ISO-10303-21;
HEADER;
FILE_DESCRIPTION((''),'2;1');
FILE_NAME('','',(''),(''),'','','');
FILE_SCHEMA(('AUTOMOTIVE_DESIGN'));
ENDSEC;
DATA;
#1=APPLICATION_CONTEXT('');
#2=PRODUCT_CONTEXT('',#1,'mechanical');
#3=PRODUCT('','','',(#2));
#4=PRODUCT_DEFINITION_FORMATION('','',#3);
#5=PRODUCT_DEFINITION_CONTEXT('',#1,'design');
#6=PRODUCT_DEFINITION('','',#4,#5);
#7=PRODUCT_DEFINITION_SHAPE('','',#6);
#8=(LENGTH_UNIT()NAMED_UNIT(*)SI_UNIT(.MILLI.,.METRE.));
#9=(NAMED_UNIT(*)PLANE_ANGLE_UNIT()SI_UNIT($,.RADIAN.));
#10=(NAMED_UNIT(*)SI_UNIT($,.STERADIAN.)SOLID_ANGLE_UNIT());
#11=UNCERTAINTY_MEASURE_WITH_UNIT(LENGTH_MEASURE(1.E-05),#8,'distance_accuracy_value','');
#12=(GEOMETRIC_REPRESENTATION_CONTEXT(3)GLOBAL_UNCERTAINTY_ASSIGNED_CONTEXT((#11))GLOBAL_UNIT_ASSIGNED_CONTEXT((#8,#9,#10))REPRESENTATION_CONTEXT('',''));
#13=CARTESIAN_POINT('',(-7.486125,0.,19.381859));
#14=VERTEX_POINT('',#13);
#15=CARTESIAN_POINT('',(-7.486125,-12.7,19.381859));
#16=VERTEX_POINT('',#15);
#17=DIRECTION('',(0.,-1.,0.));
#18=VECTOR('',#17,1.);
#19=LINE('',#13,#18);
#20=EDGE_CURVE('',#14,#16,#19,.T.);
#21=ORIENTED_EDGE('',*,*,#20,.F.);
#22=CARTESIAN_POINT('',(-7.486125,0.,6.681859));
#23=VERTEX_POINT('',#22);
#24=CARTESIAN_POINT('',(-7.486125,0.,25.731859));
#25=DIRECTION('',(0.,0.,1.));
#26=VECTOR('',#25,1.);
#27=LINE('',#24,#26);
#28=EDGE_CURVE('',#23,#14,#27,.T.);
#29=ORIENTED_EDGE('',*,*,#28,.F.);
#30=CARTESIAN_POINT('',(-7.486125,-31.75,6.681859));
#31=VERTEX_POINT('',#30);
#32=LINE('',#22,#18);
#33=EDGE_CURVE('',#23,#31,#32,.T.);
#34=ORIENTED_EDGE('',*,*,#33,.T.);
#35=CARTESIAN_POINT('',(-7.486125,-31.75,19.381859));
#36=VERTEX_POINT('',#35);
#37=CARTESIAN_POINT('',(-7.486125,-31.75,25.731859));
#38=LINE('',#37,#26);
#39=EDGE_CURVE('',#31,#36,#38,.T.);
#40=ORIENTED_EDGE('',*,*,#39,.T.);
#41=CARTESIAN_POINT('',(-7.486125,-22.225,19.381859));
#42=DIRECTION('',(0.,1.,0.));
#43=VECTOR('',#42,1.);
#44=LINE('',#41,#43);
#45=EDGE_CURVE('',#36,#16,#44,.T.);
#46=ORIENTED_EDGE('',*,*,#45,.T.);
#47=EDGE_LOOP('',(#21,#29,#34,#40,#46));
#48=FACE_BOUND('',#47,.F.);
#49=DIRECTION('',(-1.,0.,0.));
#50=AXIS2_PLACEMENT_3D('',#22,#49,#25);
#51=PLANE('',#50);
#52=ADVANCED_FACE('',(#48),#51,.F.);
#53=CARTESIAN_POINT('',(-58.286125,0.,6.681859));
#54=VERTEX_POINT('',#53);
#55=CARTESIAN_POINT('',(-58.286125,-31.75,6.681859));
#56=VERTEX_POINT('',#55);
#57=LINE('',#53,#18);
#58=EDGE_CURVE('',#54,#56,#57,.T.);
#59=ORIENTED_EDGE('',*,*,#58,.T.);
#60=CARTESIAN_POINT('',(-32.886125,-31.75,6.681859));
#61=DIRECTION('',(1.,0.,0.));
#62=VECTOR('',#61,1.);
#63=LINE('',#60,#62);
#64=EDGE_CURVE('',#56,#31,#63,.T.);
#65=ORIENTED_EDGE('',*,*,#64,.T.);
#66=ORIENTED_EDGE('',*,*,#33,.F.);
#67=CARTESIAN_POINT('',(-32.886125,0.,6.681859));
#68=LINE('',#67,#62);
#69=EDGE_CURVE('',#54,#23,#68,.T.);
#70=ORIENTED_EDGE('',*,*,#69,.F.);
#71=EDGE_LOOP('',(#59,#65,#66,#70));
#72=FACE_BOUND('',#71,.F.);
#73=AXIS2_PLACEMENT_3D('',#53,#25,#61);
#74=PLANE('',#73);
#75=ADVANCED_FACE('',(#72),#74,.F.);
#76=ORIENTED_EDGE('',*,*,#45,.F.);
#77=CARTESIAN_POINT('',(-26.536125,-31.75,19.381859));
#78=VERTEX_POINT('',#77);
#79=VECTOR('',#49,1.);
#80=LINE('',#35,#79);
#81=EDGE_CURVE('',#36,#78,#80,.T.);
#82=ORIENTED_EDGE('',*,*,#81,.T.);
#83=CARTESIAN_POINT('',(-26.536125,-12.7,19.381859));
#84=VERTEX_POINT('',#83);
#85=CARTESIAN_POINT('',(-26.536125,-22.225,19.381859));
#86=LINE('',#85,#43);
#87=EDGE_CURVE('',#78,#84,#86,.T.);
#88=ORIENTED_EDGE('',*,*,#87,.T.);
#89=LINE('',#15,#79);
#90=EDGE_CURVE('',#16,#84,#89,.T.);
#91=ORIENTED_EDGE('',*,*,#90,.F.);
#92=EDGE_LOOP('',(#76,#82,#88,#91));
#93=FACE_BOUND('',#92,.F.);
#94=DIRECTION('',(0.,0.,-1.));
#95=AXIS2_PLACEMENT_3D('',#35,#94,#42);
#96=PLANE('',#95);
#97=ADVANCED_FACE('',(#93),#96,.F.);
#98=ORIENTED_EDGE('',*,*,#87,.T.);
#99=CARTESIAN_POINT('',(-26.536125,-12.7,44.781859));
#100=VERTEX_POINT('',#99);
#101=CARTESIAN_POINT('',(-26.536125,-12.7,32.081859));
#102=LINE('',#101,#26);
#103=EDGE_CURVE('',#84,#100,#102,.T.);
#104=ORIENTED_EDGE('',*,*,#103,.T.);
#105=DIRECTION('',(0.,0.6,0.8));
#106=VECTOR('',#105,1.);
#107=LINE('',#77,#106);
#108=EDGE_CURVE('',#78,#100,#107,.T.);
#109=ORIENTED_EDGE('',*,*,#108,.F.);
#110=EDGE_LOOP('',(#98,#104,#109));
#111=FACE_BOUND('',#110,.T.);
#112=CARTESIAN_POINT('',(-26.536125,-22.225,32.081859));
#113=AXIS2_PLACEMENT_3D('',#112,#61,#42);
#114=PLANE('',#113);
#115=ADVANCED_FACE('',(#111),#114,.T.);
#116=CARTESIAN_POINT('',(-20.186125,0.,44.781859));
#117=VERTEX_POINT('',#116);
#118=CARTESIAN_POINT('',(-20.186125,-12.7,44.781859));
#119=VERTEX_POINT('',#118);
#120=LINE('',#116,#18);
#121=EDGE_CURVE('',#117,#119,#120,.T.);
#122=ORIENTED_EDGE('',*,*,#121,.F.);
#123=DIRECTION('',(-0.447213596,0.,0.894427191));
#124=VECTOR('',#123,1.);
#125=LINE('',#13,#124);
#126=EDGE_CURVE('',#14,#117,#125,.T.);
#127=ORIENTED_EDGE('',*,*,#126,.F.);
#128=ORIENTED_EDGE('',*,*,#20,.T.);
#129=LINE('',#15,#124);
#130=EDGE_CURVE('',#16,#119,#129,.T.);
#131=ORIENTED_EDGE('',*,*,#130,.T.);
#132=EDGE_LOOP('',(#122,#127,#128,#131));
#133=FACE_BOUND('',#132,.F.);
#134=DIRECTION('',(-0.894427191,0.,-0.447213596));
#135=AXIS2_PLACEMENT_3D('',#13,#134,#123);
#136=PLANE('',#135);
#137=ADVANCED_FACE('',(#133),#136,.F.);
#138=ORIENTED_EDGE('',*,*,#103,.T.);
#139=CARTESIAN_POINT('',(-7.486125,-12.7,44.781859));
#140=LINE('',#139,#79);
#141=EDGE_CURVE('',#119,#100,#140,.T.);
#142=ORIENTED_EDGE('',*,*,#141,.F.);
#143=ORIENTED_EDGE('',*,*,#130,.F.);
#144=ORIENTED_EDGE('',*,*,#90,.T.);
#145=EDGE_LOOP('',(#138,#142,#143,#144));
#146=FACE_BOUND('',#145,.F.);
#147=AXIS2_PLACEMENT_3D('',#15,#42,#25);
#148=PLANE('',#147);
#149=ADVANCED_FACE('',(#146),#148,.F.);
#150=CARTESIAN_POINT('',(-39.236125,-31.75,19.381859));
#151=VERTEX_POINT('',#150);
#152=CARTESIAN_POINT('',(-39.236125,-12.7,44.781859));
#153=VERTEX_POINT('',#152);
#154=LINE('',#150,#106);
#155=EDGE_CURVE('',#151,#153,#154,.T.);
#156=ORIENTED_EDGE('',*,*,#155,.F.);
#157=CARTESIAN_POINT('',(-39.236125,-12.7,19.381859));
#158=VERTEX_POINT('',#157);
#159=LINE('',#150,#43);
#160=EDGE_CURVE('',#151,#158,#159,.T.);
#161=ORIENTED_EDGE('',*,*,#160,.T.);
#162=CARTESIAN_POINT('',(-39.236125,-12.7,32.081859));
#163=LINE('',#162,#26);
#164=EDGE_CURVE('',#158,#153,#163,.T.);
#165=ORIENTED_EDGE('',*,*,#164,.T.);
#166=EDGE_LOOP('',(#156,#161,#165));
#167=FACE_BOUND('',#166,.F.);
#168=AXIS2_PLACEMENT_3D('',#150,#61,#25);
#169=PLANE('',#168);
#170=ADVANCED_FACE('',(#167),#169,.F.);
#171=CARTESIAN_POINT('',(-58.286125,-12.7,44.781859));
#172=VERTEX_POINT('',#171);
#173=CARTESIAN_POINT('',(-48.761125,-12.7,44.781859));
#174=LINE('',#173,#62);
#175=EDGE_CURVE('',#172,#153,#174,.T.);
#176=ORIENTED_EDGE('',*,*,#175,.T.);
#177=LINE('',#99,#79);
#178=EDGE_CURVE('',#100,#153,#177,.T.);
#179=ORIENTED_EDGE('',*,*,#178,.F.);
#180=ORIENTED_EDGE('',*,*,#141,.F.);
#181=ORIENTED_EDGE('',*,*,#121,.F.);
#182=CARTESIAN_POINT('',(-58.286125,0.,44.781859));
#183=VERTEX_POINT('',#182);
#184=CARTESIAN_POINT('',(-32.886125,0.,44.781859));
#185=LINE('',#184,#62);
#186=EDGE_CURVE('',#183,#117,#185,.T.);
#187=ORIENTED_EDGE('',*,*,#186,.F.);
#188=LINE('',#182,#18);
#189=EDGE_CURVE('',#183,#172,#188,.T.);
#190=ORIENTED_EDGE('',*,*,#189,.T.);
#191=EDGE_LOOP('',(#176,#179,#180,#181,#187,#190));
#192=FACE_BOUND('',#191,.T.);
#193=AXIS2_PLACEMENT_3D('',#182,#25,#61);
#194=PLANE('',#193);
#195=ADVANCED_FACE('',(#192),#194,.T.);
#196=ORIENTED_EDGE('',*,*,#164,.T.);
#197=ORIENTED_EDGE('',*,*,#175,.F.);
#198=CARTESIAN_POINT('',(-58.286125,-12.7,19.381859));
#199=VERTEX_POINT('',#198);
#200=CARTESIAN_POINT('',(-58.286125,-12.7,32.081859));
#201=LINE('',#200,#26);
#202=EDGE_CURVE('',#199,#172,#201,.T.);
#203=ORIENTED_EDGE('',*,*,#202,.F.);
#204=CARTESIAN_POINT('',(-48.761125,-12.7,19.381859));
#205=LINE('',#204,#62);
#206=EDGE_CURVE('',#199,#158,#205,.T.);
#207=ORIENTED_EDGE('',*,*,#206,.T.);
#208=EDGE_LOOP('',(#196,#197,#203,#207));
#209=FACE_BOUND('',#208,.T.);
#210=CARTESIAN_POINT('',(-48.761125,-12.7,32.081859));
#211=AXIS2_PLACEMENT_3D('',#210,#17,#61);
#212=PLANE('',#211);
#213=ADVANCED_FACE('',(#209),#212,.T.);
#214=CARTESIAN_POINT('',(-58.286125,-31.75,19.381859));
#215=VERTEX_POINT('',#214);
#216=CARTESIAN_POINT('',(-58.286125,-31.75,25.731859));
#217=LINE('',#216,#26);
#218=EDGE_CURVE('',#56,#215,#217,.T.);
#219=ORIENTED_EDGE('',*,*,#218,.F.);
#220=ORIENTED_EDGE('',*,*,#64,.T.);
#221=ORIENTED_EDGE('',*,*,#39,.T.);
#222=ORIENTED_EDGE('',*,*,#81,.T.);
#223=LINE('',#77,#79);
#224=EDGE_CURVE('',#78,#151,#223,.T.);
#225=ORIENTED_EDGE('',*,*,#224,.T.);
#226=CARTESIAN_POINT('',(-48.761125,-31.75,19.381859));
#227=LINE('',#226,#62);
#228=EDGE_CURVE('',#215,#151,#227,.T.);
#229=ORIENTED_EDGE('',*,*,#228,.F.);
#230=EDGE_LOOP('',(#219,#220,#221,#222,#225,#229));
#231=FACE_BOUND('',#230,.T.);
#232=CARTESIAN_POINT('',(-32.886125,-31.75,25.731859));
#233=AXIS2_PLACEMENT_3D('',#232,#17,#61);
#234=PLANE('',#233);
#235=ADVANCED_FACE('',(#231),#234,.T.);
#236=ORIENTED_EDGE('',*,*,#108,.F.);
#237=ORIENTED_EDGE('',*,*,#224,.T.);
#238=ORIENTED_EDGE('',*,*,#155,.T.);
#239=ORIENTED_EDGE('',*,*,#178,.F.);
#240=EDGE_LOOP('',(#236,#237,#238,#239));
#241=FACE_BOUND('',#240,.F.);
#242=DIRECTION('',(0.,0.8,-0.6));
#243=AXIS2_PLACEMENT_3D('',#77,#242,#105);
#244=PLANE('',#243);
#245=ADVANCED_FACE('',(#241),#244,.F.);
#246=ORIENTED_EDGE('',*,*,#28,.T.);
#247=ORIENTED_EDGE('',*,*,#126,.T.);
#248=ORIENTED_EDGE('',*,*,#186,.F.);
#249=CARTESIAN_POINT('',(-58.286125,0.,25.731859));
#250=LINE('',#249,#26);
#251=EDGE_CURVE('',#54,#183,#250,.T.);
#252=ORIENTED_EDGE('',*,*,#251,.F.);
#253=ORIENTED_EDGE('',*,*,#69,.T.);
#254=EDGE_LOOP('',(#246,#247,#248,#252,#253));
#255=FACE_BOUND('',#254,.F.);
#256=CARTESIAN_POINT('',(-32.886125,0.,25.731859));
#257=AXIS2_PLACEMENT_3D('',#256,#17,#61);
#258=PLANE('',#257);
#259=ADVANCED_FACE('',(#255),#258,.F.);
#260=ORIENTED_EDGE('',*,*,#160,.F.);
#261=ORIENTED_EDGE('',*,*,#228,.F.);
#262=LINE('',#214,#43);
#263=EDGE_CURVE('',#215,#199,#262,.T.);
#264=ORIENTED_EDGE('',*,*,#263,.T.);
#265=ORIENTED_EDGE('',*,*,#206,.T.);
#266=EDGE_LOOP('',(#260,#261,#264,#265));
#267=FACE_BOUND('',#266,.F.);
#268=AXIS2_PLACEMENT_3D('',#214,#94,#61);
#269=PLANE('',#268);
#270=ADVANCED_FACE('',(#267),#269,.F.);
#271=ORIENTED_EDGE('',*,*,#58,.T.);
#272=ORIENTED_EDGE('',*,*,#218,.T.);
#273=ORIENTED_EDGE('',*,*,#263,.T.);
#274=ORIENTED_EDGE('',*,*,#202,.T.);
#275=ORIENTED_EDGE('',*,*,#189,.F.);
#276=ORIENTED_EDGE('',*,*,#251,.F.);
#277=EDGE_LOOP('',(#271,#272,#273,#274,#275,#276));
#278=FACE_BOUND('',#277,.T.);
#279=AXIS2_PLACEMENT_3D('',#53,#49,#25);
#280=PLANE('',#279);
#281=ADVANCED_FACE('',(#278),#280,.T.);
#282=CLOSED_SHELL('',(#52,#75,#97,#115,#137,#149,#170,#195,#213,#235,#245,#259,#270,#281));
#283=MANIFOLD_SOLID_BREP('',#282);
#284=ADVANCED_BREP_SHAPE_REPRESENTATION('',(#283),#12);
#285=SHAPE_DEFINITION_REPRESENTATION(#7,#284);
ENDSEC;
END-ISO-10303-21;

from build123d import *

# Parameters (mm, degrees)
F0_W     = 50.8
F0_H     = 38.1
F1_DEPTH = 31.75
F3_DEPTH = 12.7
F4_W     = 19.05
F4_H     = 25.4
F5_DEPTH = 19.05
F7_DEPTH = 12.7
F8_W     = 19.05
F8_H     = 25.4
F9_DEPTH = 19.05


with BuildPart() as f1:
    # F0 (on Front) → F1 (new body)
    with BuildSketch(Plane.XZ):
        with Locations((-32.8861247392, 25.7318585645)):
            Rectangle(F0_W, F0_H)
    extrude(amount=F1_DEPTH)

    # F2 (on face) → F3 (cut)
    with BuildSketch(Plane(origin=(0, 0, 0), x_dir=(-1, 0, 0), z_dir=(0, 1, 0))):
        Polygon((7.4861247392, 19.3818585645), (20.1861247392, 44.7818585645), (7.4861247392, 44.7818585645), align=None)
    extrude(amount=-F3_DEPTH, mode=Mode.SUBTRACT)

    # F4 (on face) → F5 (cut)
    with BuildSketch(Plane.YZ.offset(-7.4861247392)):
        with Locations((-22.225, 32.0818585645)):
            Rectangle(F4_W, F4_H)
    extrude(amount=-F5_DEPTH, mode=Mode.SUBTRACT)

    # F6 (on face) → F7 (cut)
    with BuildSketch(Plane.YZ.offset(-26.5361247392)):
        Polygon((-31.75, 19.3818585645), (-12.7, 44.7818585645), (-31.75, 44.7818585645), align=None)
    extrude(amount=-F7_DEPTH, mode=Mode.SUBTRACT)

    # F8 (on face) → F9 (cut)
    with BuildSketch(Plane.XZ.offset(31.75)):
        with Locations((-48.7611247392, 32.0818585645)):
            Rectangle(F8_W, F8_H)
    extrude(amount=-F9_DEPTH, mode=Mode.SUBTRACT)


solid = f1.part
